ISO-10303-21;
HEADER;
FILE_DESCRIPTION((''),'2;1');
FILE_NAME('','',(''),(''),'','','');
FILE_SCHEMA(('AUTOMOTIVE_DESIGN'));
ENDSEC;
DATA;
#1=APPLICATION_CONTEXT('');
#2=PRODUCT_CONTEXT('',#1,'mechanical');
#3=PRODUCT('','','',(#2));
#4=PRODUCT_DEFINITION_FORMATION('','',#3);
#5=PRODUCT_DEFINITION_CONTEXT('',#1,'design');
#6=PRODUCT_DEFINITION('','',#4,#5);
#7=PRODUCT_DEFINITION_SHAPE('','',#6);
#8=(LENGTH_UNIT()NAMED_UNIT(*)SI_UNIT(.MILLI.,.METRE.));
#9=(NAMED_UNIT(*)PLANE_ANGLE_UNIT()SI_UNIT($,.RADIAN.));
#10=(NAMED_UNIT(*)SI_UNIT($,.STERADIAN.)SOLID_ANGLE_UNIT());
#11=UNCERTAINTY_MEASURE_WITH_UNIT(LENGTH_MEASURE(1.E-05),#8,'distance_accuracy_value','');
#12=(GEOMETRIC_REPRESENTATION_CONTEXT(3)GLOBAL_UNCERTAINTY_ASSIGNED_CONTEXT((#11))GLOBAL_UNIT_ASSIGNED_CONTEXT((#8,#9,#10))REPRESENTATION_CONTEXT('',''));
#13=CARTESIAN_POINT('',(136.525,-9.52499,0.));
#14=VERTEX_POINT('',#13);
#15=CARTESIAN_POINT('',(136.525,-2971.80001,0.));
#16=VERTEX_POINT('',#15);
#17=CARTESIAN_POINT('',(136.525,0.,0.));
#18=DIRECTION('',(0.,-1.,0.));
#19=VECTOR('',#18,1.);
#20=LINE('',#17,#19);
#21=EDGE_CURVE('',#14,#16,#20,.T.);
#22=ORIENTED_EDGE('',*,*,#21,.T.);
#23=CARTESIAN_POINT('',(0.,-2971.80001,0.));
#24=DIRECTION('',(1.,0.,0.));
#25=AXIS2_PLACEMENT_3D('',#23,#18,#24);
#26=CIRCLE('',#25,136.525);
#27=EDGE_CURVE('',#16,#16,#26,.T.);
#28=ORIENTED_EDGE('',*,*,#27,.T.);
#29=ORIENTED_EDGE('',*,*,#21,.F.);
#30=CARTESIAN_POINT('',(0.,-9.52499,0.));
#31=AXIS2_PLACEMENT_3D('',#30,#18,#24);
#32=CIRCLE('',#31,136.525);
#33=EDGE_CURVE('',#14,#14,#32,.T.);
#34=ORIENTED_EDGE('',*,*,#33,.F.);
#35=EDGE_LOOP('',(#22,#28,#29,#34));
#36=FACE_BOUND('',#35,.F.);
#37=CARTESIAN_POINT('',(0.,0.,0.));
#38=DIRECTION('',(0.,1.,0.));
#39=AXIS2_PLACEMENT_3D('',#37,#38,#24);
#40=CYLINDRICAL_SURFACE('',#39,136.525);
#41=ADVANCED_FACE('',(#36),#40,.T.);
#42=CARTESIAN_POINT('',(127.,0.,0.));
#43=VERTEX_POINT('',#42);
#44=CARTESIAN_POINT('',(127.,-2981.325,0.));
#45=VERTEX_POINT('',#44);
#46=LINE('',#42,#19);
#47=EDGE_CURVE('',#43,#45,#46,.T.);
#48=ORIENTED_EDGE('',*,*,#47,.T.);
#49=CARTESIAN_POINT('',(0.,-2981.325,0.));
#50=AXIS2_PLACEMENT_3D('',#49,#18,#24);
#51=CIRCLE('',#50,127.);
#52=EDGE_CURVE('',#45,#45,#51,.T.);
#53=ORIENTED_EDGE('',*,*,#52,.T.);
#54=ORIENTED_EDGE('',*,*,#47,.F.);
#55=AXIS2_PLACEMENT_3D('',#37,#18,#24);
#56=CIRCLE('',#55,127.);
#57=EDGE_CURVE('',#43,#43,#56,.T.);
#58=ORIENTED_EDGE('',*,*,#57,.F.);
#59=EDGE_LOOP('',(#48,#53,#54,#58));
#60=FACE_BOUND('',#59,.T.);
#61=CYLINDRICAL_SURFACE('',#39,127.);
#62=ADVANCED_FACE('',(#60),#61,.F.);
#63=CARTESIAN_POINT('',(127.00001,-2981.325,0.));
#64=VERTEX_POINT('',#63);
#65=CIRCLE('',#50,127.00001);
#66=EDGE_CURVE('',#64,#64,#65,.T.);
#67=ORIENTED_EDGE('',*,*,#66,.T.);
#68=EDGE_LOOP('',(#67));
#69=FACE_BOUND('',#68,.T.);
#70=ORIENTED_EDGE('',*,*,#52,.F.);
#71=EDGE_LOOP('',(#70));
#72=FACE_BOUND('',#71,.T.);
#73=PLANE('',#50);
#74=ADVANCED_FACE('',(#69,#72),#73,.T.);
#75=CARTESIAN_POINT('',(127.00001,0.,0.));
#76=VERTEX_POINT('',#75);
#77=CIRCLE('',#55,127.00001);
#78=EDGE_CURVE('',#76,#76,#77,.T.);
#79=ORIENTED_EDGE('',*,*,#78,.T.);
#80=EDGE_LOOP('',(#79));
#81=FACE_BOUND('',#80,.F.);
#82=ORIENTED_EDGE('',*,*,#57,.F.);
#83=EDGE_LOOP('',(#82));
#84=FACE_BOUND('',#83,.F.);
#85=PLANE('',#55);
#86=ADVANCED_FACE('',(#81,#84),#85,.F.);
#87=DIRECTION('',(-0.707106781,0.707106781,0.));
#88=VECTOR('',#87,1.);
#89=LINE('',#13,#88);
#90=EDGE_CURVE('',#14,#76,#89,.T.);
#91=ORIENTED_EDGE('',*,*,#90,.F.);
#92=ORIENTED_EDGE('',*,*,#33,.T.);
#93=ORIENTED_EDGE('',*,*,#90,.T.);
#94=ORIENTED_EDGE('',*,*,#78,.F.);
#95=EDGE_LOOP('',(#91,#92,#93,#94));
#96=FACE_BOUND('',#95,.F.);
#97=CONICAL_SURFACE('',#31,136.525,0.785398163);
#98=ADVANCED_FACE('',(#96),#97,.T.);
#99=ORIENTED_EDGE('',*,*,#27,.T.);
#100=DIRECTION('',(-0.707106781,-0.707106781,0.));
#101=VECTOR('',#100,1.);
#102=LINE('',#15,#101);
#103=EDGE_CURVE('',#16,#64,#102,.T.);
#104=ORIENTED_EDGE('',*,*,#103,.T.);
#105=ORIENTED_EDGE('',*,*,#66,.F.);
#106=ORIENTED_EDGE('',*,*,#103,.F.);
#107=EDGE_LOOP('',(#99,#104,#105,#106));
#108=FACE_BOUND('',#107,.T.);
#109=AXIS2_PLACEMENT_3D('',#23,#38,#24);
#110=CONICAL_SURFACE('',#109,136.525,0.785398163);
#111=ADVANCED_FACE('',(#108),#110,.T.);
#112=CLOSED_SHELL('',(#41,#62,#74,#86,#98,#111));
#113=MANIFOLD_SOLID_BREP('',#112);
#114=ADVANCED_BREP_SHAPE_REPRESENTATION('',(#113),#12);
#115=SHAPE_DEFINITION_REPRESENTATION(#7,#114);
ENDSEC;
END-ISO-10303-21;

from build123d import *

# Parameters (mm, degrees)
F0_R     = 136.525
F0_R_2   = 127
F1_DEPTH = 2981.325
F2_SIZE  = 9.52499


# Not quite as in the source:
# - a fillet or chamfer is up to 0.001 mm smaller than in the source, because OpenCascade refuses the exact size


with BuildPart() as f1:
    # F0 (on Front) → F1 (new body)
    with BuildSketch(Plane.XZ):
        Circle(F0_R)
        Circle(F0_R_2, mode=Mode.SUBTRACT)
    extrude(amount=F1_DEPTH)

    # F2 (size 9.525 in the source; OpenCascade refuses exactly that, so slightly less here)
    f2_edges = [f1.edges().sort_by_distance(p)[0] for p in [
        (-136.525, 0, 0),
        (-136.525, -2981.325, 0),
    ]]
    chamfer(f2_edges, length=F2_SIZE)


solid = f1.part
